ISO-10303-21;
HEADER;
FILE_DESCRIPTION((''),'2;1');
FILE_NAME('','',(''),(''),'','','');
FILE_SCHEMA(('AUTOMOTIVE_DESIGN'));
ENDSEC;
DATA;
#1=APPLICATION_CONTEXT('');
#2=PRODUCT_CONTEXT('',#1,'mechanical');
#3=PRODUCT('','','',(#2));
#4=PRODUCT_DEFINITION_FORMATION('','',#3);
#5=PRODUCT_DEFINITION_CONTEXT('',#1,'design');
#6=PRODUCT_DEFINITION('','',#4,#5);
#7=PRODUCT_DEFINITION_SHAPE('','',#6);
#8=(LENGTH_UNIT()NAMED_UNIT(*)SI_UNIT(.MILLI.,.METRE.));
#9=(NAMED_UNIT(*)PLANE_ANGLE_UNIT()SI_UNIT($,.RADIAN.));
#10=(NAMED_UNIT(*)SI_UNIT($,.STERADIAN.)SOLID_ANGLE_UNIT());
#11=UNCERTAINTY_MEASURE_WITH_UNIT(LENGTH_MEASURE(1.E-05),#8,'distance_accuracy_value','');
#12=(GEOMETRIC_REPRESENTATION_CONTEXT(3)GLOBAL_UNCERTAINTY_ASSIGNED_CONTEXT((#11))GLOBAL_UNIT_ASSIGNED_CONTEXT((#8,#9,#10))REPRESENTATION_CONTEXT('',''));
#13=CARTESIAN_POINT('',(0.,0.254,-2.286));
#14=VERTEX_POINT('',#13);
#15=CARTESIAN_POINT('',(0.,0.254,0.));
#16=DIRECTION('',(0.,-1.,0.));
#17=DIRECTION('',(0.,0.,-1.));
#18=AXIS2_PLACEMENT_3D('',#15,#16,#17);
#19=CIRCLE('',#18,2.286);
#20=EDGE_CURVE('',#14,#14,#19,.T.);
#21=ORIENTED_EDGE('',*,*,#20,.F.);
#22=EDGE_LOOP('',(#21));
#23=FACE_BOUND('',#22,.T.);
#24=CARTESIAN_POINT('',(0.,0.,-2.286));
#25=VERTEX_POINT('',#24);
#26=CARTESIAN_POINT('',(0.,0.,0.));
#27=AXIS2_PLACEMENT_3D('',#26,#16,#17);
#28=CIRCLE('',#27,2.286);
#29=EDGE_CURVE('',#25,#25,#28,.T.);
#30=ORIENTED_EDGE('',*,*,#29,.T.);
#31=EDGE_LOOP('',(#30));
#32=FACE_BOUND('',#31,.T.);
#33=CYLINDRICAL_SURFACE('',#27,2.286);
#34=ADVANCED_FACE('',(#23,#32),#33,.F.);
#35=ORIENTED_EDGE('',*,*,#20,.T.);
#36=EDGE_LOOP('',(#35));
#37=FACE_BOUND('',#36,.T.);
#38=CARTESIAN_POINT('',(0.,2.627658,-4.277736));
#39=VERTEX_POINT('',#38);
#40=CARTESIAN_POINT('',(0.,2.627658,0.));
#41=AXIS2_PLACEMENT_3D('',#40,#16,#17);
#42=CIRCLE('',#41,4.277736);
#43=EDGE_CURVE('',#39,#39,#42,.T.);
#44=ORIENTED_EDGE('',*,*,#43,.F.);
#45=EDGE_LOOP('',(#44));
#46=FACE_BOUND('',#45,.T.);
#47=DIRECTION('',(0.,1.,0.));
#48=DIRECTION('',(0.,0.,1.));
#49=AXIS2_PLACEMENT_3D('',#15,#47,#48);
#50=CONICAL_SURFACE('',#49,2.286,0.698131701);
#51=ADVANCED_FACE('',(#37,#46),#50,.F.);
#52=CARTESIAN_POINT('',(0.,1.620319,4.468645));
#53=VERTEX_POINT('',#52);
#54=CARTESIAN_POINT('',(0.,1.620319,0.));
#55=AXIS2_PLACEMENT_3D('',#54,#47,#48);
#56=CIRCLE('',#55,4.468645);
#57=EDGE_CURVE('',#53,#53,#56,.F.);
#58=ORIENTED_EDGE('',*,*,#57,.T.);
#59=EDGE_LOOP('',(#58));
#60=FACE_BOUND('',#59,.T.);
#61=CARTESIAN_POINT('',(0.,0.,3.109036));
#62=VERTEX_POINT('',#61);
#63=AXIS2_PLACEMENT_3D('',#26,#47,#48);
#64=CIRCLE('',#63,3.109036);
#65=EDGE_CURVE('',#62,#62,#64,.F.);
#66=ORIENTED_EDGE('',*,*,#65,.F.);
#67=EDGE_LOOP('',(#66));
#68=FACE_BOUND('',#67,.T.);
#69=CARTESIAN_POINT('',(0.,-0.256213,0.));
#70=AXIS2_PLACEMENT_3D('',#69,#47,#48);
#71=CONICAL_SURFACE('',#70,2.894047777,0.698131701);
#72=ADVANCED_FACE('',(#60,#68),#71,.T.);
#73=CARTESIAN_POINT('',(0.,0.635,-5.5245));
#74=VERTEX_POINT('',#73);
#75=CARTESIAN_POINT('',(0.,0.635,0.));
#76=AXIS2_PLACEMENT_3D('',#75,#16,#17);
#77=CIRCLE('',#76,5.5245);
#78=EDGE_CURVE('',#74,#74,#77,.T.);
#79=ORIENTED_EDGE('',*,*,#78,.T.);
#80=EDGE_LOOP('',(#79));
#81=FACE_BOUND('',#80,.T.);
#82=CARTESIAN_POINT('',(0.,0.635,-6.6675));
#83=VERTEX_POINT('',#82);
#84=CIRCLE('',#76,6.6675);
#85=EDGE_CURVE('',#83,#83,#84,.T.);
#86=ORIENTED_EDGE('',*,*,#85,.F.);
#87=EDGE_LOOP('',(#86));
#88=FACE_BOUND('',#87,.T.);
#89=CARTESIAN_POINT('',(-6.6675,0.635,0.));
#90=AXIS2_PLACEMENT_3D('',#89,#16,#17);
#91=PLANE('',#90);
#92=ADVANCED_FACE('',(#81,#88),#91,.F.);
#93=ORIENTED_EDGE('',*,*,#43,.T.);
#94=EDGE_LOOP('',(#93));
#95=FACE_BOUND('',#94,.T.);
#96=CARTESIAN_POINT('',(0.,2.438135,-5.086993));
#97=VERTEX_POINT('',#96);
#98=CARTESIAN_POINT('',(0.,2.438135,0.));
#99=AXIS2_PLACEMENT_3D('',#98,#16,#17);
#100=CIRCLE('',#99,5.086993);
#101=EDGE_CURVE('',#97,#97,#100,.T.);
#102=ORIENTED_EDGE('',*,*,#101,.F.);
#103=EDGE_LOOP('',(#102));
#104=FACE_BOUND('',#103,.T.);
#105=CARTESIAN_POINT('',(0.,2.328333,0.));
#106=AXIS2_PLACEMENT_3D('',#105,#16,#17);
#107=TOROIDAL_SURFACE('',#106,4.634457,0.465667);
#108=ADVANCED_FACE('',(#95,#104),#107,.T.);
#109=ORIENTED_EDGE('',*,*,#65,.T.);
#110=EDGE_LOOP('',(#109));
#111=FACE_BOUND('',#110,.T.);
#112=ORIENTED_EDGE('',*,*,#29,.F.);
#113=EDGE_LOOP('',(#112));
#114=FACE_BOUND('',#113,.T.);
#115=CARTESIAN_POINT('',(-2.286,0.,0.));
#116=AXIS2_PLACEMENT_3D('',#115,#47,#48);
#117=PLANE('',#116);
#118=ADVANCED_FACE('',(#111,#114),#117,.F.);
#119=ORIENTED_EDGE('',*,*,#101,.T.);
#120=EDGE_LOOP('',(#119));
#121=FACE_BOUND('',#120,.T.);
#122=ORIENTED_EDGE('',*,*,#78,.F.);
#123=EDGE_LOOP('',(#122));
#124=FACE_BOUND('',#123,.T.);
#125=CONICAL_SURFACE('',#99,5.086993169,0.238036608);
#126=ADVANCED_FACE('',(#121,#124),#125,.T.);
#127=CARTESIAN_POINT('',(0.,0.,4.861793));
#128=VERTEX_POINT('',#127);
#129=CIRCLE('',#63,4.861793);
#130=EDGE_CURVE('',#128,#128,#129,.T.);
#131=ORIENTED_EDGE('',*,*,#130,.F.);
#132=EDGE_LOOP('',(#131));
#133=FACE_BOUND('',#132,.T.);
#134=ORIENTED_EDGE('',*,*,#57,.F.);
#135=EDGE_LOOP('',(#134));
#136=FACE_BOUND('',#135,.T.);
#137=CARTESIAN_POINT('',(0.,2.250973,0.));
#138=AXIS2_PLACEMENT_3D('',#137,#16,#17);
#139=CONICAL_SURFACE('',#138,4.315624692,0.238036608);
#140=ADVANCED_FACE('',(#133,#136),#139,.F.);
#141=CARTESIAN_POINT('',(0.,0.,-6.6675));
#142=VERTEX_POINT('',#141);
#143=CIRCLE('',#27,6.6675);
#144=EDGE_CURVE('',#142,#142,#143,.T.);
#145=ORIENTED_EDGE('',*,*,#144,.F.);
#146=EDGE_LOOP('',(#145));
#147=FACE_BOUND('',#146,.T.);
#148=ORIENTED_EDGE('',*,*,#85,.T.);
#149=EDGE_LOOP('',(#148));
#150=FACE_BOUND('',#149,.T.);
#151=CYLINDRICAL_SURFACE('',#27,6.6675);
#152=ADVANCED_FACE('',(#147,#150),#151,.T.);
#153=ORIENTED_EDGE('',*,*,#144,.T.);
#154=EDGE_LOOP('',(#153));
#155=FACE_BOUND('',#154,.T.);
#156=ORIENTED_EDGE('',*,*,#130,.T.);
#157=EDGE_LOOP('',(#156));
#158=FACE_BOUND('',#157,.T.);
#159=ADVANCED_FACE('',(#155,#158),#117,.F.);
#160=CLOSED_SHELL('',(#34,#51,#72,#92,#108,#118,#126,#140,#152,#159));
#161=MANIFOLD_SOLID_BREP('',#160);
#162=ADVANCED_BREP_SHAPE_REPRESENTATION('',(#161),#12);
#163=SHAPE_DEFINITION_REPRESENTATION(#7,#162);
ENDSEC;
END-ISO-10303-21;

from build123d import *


# Read off the part's stored shape, not the designer's step: Shell2
with BuildPart() as part:
    # Sketch1 → Revolve1 (revolve)
    with BuildSketch(Plane.XY, mode=Mode.PRIVATE) as revolve1_sk:
        with BuildLine():
            Line((-6.6675, 0), (-6.6675, 0.635))
            Line((-6.6675, 0.635), (-5.5245, 0.635))
            Line((-5.5245, 0.635), (-5.086993169, 2.438135229))
            ThreePointArc((-5.086993169, 2.438135229), (-4.740640087, 2.78173227), (-4.277735634, 2.627658097))
            Line((-4.277735634, 2.627658097), (-2.286, 0.254))
            Line((-2.286, 0.254), (-2.286, 0))
            Line((-2.286, 0), (-6.6675, 0))
        make_face()
    revolve(revolve1_sk.sketch.rotate(Axis((0, 0, 0), (0, 1, 0)), 270), axis=Axis((0, 0, 0), (0, 1, 0)))

    # Shell2 outline → Shell2 (revolve, cut)
    with BuildSketch(Plane.XY):
        Polygon((4.861793391, 0), (4.468644562, 1.620318711), (3.10903573, 0), align=None)
    revolve(axis=Axis((0, 0, 0), (0, 1, 0)), mode=Mode.SUBTRACT)


solid = part.part
